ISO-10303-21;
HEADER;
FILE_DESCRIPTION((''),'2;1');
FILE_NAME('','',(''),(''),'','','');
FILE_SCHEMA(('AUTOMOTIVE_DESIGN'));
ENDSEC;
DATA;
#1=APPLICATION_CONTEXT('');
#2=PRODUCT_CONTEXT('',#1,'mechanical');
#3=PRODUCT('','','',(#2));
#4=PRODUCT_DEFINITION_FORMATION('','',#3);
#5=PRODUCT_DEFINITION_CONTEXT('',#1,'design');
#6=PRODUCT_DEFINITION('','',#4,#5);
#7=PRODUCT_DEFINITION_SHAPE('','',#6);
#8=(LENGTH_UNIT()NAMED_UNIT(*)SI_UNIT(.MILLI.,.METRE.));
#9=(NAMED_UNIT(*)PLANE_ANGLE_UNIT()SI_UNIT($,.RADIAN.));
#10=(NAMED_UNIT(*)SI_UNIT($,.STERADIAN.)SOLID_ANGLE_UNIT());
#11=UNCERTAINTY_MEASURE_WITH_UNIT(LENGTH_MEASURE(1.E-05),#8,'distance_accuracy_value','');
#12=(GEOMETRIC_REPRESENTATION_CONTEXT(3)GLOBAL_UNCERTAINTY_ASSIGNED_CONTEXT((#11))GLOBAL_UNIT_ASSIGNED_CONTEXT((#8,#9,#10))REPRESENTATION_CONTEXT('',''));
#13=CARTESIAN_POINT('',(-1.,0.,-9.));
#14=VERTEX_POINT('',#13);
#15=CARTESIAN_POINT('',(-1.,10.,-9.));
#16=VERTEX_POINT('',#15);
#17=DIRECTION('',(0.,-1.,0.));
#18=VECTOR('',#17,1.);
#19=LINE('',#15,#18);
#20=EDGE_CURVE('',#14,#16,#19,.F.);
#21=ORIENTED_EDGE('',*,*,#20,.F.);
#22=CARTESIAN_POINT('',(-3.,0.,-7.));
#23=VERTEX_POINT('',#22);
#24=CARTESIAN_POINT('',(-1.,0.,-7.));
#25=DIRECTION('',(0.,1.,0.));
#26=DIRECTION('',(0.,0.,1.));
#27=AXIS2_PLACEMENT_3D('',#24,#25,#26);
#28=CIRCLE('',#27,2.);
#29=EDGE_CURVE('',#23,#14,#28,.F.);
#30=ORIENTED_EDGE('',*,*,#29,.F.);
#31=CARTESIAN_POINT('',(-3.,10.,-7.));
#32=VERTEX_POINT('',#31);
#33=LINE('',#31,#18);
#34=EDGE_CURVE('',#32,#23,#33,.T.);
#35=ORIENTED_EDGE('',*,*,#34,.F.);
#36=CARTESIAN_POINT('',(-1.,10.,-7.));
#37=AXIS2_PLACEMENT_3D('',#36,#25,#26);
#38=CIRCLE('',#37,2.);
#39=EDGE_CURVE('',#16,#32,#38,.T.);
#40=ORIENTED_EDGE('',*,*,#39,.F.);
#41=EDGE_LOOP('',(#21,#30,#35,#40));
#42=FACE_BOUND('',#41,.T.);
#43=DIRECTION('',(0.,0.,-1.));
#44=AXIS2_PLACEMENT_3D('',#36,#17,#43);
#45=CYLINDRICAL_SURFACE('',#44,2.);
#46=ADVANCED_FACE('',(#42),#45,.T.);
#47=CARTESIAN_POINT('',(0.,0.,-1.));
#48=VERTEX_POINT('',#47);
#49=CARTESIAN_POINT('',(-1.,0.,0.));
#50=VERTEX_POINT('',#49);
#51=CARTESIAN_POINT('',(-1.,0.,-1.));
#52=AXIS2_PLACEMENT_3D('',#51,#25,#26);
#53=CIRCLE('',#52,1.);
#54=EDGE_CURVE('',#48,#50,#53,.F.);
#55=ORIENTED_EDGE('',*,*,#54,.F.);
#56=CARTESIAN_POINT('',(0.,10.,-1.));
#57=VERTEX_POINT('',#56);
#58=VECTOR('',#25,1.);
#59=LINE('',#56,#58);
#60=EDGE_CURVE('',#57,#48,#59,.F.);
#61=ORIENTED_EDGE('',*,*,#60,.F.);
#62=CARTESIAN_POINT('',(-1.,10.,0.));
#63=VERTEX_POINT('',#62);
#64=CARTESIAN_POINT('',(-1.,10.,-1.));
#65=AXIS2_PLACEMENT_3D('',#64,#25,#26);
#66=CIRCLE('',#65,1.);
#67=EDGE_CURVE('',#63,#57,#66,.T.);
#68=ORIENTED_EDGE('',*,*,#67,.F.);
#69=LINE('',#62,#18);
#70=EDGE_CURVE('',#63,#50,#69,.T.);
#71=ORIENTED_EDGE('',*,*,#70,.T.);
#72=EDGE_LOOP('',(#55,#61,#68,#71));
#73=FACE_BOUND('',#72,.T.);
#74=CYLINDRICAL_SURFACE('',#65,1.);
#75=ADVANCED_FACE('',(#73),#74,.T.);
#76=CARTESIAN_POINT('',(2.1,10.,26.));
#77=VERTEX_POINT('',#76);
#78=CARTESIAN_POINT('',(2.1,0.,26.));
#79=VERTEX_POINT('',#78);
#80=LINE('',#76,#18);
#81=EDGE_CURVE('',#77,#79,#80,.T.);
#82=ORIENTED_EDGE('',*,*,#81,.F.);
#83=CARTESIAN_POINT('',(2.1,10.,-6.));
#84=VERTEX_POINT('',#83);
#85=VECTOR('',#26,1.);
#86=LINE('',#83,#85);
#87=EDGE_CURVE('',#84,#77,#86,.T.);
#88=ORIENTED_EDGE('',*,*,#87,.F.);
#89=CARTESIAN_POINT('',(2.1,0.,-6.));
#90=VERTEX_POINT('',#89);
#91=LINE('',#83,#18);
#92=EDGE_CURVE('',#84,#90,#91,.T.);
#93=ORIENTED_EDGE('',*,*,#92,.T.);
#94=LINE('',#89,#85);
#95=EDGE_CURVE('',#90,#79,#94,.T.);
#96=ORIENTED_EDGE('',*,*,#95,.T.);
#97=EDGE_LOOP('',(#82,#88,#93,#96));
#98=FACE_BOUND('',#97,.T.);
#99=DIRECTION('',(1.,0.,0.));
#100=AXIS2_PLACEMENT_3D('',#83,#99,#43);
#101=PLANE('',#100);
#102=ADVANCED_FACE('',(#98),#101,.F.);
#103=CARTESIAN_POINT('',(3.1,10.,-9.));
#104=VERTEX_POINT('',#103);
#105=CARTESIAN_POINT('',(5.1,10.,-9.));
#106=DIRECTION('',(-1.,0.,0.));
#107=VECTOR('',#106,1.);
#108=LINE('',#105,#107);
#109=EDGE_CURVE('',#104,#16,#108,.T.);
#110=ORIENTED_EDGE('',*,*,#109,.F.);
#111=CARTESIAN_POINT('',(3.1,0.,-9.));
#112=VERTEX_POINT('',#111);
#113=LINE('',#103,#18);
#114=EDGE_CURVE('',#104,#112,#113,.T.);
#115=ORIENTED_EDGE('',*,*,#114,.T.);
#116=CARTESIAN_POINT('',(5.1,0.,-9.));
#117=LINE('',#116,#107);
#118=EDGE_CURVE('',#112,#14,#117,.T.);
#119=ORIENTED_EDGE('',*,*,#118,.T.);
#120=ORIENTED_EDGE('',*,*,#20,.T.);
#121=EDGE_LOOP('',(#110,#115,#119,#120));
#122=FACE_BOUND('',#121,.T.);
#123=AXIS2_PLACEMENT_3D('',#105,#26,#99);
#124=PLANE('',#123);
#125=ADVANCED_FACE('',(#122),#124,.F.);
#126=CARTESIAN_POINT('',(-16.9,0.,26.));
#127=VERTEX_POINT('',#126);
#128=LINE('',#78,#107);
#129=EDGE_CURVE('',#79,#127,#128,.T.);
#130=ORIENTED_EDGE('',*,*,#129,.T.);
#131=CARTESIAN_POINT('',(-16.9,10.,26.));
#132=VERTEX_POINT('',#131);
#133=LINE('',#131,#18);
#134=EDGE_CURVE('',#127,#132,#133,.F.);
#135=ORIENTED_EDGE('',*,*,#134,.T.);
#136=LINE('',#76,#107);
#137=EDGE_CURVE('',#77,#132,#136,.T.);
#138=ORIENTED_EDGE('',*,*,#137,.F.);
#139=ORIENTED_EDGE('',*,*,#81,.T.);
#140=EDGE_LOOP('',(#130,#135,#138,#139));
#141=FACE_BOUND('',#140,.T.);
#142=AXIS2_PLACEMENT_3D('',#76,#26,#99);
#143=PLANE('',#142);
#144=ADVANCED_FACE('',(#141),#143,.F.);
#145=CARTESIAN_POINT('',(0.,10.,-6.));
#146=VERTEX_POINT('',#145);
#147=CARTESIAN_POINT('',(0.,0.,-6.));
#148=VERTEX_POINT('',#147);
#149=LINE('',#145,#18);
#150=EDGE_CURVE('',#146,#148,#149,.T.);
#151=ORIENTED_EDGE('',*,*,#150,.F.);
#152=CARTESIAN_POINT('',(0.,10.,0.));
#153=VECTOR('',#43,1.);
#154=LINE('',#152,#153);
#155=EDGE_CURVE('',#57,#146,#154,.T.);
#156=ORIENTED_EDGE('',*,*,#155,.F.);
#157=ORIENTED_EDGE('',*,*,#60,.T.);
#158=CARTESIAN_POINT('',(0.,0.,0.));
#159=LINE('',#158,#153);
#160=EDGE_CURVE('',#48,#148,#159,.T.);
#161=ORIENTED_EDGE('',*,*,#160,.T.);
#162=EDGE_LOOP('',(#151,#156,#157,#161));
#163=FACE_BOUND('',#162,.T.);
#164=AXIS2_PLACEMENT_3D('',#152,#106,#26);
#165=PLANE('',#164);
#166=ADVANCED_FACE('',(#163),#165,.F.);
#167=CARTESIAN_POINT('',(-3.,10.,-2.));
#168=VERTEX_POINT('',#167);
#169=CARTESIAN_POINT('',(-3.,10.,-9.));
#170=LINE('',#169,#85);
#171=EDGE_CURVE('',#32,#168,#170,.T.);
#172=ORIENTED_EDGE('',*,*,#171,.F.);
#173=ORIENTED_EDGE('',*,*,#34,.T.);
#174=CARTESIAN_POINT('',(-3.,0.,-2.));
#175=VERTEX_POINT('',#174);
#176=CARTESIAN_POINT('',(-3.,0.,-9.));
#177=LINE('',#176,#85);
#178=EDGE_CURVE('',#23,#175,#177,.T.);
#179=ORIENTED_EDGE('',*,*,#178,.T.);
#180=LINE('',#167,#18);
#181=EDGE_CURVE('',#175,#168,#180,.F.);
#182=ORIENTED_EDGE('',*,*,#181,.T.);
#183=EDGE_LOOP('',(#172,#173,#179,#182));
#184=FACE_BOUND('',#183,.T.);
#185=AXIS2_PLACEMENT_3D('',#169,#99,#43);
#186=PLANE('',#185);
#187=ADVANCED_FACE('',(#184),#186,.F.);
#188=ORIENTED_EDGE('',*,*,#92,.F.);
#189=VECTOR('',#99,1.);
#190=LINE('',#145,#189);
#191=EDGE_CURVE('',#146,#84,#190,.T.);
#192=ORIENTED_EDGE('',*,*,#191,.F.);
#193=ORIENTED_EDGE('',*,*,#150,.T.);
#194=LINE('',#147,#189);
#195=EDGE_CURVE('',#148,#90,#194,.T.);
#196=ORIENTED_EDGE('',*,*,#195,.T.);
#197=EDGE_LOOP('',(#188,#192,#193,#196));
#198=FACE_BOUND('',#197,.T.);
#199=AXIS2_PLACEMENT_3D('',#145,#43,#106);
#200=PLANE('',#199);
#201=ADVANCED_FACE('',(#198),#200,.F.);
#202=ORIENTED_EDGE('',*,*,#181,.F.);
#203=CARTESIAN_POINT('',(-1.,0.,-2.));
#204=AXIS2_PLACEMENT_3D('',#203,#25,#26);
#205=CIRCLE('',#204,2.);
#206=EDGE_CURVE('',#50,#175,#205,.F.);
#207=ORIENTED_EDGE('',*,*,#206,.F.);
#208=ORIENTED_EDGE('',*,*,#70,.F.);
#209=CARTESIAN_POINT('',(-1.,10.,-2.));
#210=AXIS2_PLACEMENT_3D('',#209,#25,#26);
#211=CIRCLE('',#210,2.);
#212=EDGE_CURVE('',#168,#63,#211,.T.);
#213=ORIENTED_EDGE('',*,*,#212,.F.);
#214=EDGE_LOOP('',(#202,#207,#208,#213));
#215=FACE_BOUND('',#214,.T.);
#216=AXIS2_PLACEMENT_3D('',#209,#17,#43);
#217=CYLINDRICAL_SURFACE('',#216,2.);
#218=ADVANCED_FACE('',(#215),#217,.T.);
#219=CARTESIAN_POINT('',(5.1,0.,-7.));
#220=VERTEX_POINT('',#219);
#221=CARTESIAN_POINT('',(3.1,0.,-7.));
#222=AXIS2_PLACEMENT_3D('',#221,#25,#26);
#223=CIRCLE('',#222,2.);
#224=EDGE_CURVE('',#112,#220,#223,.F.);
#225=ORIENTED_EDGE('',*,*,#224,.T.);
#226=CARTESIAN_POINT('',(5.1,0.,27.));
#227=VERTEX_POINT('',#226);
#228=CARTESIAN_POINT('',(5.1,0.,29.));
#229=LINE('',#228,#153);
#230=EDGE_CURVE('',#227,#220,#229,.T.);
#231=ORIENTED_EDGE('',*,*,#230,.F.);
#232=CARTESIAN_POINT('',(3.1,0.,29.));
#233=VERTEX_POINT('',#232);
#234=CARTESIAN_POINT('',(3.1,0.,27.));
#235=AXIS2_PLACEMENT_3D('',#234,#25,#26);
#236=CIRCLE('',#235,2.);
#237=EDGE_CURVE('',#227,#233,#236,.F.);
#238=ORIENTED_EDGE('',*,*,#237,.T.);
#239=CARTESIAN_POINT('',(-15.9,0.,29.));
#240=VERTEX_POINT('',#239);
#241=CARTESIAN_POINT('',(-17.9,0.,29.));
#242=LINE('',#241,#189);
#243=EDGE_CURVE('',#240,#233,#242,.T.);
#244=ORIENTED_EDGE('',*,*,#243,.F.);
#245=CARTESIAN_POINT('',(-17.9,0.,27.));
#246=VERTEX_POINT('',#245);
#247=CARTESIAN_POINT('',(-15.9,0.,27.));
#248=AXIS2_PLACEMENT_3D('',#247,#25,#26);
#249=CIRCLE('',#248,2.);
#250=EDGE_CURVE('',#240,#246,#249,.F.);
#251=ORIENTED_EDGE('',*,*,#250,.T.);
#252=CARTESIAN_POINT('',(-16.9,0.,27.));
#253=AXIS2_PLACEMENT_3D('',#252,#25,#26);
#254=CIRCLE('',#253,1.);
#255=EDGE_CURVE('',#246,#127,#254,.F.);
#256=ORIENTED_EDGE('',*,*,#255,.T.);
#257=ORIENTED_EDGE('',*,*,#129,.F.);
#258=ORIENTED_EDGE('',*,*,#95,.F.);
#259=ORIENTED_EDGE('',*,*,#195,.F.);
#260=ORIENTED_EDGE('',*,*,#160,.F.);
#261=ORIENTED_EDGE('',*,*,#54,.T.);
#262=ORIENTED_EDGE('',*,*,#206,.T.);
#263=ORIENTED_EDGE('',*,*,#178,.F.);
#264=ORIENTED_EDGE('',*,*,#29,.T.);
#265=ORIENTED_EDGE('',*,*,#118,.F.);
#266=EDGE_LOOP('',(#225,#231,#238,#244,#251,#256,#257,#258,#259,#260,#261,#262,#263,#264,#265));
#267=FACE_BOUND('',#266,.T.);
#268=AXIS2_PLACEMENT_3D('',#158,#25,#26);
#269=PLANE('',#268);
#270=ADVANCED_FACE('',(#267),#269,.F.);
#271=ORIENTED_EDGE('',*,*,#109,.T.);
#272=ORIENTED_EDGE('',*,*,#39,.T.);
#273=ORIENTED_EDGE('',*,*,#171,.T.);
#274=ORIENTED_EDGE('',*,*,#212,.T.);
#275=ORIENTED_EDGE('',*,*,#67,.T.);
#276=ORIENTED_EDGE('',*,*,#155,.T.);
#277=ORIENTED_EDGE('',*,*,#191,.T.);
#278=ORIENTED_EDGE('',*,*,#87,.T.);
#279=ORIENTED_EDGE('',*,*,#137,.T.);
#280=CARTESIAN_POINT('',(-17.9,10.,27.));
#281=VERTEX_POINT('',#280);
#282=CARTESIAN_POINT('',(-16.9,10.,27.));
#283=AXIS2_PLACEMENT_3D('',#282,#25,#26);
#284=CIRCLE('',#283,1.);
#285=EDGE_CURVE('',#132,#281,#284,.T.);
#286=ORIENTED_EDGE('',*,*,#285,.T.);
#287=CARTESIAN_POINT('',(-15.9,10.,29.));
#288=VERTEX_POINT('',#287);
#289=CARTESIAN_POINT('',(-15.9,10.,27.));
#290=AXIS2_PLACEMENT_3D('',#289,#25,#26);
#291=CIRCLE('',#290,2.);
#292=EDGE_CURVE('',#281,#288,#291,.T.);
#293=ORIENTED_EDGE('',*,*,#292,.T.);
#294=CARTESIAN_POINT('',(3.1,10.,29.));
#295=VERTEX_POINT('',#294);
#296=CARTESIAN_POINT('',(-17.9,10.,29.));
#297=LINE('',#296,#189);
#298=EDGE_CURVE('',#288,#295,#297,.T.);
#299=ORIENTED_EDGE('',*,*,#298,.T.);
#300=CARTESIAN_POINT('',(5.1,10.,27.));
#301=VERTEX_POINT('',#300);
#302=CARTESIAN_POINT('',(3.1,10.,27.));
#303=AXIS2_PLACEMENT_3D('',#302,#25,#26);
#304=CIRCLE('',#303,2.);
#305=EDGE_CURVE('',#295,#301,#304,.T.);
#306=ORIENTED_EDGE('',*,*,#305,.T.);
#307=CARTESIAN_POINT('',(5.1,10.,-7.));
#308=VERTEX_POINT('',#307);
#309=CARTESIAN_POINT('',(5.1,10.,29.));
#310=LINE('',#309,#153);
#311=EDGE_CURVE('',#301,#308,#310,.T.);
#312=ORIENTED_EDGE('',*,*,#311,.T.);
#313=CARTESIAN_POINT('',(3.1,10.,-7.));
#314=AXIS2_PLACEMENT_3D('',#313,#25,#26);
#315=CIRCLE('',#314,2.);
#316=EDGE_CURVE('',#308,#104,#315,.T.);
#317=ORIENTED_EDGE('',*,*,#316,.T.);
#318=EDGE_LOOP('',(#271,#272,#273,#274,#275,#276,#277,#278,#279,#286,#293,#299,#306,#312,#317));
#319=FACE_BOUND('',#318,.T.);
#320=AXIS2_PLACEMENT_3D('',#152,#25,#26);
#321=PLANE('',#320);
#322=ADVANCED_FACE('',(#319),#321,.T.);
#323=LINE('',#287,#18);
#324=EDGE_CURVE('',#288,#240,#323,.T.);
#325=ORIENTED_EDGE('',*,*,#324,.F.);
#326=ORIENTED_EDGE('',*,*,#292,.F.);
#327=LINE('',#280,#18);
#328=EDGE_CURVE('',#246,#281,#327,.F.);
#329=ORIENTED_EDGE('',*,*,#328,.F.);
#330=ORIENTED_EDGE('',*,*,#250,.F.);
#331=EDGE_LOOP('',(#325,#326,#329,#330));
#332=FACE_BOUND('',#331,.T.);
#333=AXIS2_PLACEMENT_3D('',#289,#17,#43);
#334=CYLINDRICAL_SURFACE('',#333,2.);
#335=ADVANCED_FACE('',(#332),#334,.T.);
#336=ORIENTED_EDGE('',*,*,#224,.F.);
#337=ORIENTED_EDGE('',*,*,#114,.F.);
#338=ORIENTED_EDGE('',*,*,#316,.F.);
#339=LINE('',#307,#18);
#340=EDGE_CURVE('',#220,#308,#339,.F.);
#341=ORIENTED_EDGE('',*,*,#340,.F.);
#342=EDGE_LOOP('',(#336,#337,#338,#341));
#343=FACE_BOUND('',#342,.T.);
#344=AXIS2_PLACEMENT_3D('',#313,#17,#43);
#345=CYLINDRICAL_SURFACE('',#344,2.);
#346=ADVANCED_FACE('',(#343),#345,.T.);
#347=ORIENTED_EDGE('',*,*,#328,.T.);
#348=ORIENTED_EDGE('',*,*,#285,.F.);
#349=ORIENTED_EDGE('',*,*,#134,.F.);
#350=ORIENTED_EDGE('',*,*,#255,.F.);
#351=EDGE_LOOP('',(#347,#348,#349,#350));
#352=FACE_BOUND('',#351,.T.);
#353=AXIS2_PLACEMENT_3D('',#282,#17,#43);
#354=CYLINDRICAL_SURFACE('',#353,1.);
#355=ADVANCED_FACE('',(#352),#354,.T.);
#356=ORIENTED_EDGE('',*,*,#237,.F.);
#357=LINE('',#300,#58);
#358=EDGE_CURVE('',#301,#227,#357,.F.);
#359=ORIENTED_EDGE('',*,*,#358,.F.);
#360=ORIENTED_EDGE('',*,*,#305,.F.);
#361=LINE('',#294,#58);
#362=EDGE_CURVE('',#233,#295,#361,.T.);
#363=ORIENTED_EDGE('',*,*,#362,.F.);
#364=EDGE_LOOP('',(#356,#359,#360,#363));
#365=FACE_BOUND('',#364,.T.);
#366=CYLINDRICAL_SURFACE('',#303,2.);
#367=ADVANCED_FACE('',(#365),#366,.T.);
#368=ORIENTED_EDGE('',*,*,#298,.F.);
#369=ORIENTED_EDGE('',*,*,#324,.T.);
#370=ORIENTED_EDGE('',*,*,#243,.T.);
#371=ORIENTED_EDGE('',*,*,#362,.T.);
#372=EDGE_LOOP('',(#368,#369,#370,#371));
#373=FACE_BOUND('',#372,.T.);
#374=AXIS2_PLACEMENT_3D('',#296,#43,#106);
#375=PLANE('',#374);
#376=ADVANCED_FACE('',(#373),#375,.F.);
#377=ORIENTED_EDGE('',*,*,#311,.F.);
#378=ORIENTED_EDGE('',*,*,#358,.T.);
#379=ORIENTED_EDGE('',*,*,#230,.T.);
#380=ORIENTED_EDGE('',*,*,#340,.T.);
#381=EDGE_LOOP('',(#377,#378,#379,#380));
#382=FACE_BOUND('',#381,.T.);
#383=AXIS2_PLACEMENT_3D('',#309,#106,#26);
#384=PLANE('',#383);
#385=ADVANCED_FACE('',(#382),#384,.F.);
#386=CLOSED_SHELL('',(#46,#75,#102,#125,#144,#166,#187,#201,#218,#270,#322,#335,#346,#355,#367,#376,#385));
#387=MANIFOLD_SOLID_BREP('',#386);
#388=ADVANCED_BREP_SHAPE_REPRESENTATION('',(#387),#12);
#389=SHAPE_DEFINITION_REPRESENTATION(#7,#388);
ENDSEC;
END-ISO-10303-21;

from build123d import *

# Parameters (mm, degrees)
BOSS_EXTRUDE1_DEPTH = 10
FILLET1_R           = 2
FILLET2_R           = 2
FILLET3_R           = 2
FILLET4_R           = 2
FILLET5_R           = 1
FILLET6_R           = 2
FILLET7_R           = 1


with BuildPart() as part:
    # Sketch1 → Boss-Extrude1 (new body)
    with BuildSketch(Plane(origin=(0, 0, 0), x_dir=(1, 0, 0), z_dir=(0, 1, 0))):
        Polygon((0, 0), (0, 6), (2.1, 6), (2.1, -26), (-17.9, -26), (-17.9, -29), (5.1, -29), (5.1, 9), (-3, 9), (-3, 0), align=None)
    extrude(amount=BOSS_EXTRUDE1_DEPTH)

    # Fillet1
    fillet1_edges = [part.edges().sort_by_distance(p)[0] for p in [
        (5.1, 5, -9),
    ]]
    fillet(fillet1_edges, radius=FILLET1_R)

    # Fillet2
    fillet2_edges = [part.edges().sort_by_distance(p)[0] for p in [
        (5.1, 5, 29),
    ]]
    fillet(fillet2_edges, radius=FILLET2_R)

    # Fillet3
    fillet3_edges = [part.edges().sort_by_distance(p)[0] for p in [
        (-17.9, 5, 29),
    ]]
    fillet(fillet3_edges, radius=FILLET3_R)

    # Fillet4
    fillet4_edges = [part.edges().sort_by_distance(p)[0] for p in [
        (-3, 5, -9),
    ]]
    fillet(fillet4_edges, radius=FILLET4_R)

    # Fillet5
    fillet5_edges = [part.edges().sort_by_distance(p)[0] for p in [
        (-17.9, 5, 26),
    ]]
    fillet(fillet5_edges, radius=FILLET5_R - 0.0001)  # a hair under: the kernel refuses the full size

    # Fillet6
    fillet6_edges = [part.edges().sort_by_distance(p)[0] for p in [
        (-3, 5, 0),
    ]]
    fillet(fillet6_edges, radius=FILLET6_R)

    # Fillet7
    fillet7_edges = [part.edges().sort_by_distance(p)[0] for p in [
        (0, 5, 0),
    ]]
    fillet(fillet7_edges, radius=FILLET7_R - 0.0001)  # a hair under: the kernel refuses the full size


solid = part.part
